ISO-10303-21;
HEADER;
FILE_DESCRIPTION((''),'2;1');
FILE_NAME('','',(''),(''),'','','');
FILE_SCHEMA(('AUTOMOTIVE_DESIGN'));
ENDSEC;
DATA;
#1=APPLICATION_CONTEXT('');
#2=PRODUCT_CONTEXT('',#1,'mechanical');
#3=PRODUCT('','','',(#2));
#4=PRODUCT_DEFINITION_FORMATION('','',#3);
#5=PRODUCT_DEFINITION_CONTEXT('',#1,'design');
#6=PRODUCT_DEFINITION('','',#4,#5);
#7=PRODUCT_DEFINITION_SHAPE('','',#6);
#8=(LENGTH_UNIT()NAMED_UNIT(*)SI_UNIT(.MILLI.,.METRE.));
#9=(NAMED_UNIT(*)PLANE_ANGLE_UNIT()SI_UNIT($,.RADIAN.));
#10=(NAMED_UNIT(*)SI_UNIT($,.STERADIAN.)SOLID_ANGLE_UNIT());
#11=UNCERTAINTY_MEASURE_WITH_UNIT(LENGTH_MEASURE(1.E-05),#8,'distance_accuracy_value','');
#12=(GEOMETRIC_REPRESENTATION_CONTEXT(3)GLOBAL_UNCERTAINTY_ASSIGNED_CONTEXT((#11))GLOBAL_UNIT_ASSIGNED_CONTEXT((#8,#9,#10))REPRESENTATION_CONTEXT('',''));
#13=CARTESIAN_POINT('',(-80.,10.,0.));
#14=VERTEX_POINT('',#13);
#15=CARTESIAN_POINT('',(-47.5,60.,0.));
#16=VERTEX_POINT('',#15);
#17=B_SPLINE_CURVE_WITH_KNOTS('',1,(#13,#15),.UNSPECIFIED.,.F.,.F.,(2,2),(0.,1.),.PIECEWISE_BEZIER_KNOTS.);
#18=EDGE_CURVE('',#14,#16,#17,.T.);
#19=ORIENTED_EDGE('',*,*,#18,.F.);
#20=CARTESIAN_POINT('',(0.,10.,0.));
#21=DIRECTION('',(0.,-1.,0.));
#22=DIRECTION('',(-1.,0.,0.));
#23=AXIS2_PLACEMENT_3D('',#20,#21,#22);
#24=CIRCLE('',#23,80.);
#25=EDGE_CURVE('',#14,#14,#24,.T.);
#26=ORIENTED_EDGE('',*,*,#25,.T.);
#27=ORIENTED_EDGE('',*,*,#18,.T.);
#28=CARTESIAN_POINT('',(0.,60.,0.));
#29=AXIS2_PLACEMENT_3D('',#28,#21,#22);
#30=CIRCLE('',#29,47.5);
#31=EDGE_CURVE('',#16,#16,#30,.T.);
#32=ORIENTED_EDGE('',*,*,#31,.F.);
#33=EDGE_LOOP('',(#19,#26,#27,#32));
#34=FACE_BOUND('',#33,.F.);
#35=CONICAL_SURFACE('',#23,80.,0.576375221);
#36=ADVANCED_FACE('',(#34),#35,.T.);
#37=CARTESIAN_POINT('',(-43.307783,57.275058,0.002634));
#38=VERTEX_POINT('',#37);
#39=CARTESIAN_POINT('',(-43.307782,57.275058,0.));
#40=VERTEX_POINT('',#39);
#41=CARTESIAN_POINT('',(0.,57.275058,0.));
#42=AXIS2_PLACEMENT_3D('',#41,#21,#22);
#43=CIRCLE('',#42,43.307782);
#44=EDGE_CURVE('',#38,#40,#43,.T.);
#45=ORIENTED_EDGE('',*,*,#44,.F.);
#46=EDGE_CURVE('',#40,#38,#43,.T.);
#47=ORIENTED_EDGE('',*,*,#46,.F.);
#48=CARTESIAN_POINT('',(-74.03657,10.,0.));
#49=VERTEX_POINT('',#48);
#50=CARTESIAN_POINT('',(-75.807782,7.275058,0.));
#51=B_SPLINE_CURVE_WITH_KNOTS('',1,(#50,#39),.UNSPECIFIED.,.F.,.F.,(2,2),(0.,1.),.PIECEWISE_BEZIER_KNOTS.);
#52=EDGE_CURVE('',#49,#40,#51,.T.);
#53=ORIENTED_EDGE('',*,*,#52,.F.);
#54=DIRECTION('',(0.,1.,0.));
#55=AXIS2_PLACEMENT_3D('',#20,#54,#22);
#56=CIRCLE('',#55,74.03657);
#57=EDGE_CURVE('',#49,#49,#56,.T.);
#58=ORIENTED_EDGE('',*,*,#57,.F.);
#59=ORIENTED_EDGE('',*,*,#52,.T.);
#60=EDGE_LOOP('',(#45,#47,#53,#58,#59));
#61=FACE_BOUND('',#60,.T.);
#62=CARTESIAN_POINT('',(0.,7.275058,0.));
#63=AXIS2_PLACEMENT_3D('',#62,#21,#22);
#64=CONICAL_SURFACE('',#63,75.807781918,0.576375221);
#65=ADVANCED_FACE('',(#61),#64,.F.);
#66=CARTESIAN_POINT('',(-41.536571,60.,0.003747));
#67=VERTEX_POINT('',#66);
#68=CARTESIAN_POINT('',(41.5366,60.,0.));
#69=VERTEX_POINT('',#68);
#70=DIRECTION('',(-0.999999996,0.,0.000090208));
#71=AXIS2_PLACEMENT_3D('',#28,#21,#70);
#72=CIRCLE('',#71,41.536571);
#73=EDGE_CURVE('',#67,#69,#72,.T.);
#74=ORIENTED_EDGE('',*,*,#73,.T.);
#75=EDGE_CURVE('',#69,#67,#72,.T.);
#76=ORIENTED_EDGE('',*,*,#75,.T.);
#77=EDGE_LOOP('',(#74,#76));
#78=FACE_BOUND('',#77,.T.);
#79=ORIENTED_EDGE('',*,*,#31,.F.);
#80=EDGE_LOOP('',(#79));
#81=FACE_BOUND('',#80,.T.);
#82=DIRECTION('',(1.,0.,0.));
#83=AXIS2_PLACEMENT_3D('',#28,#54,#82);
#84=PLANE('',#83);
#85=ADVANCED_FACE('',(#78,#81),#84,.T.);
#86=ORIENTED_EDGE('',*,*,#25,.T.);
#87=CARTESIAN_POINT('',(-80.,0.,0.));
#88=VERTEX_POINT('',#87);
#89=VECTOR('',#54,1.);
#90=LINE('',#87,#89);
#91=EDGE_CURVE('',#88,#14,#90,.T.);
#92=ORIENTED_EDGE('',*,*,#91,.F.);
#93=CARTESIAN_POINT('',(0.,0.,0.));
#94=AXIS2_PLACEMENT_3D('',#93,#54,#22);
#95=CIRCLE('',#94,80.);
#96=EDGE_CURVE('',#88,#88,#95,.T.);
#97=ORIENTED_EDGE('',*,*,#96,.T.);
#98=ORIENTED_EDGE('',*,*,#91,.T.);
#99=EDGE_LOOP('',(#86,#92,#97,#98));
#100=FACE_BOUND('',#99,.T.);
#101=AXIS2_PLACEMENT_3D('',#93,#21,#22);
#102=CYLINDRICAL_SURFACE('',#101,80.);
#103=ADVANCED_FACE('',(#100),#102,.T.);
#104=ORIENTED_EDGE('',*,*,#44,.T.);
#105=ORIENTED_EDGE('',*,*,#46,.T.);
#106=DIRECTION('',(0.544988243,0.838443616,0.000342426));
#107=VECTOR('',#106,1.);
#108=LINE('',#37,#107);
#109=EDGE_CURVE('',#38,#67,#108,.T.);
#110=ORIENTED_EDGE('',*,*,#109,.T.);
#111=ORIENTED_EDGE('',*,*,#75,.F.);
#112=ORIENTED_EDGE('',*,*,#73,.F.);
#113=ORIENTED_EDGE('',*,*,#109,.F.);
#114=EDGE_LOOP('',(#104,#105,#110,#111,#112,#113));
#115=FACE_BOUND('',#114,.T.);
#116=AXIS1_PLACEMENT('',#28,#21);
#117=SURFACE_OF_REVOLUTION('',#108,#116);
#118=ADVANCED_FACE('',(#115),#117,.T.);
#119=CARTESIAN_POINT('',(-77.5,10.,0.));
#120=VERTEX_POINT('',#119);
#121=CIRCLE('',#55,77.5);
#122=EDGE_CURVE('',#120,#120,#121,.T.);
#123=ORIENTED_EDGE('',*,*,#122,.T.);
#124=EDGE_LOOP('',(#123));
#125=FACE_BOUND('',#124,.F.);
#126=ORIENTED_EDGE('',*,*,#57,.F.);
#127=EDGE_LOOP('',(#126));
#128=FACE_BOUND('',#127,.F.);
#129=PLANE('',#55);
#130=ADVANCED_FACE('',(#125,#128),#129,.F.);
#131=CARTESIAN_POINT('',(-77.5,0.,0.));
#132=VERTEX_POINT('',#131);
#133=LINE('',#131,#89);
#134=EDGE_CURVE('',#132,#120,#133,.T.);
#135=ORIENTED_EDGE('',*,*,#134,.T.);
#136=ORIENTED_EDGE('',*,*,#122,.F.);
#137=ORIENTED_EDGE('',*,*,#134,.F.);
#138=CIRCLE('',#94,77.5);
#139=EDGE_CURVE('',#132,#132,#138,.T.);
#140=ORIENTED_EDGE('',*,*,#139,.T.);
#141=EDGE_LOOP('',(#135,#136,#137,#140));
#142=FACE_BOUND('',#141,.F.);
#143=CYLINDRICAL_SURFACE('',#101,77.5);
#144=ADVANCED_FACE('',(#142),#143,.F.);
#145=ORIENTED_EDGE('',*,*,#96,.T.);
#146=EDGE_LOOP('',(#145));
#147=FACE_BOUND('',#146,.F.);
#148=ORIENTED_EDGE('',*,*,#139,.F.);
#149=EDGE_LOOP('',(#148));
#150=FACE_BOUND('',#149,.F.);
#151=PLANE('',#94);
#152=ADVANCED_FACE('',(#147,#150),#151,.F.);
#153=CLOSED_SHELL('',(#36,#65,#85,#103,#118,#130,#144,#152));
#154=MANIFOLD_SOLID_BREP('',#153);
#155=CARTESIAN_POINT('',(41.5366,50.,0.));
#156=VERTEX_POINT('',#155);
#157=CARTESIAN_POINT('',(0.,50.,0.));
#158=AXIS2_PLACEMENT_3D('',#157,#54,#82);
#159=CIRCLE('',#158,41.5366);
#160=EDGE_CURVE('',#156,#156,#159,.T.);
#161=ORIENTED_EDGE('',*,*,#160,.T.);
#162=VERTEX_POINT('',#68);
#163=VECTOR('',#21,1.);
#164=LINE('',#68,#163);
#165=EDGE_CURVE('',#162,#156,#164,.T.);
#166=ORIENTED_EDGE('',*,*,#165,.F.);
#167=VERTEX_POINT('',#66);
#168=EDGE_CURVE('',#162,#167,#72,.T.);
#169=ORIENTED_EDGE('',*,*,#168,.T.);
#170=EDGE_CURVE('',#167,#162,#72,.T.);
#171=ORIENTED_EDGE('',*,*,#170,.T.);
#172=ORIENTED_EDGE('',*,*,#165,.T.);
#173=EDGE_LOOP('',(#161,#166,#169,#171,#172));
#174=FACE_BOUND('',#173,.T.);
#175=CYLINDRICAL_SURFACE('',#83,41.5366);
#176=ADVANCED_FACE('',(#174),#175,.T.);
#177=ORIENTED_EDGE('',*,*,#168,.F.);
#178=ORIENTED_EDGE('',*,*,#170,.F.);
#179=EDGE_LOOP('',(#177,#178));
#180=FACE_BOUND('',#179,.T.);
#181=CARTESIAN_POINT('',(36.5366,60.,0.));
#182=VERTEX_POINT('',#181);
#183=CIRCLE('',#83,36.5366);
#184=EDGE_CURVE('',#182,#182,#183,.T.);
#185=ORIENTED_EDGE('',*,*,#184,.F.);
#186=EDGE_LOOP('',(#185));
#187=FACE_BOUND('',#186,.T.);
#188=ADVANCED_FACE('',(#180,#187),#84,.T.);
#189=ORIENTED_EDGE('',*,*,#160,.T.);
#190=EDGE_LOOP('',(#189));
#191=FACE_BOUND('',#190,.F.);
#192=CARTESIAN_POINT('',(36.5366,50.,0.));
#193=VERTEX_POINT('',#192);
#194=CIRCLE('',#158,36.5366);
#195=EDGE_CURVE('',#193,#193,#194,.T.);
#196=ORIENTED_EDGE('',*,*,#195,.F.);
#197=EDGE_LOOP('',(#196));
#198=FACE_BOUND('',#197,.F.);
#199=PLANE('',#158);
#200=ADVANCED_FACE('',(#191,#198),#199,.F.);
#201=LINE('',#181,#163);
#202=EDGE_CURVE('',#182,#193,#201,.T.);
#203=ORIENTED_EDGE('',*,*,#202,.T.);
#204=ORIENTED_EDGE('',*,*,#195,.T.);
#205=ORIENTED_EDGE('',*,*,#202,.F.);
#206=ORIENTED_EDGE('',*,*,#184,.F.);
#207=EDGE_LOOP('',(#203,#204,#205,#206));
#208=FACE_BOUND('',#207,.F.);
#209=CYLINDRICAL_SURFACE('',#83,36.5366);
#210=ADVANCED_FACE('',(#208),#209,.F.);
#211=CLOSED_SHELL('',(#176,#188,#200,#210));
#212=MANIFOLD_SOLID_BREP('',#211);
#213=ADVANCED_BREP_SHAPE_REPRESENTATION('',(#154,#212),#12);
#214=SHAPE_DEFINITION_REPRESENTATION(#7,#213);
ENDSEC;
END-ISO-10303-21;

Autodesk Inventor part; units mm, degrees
ref_plane "YZ Plane" through (0, 0, 0) normal (1, 0, 0) x (0, 1, 0)
ref_plane "XZ Plane" through (0, 0, 0) normal (0, 1, 0) x (-1, 0, 0)
sketch "Sketch1" plane through (0, 0, 0) normal (0, 1, 0) x (-1, 0, 0)
  circle A0 centre (0, 0) radius 80
  circle A1 centre (0, 0) radius 77.5
  dimension "d0" = 160
  dimension "d1" = 2.5
extrude "Extrusion1" add sketch "Sketch1" along normal blind 10
ref_plane "Work Plane1" through (0, 60, 0) normal (0, 1, 0) x (1, 0, 0)
sketch "Sketch2" plane through (0, 60, 0) normal (0, 1, 0) x (1, 0, 0)
  circle A0 centre (0, 0) radius 52.5
  circle A1 centre (0, 0) radius 77.5 projected
  circle A2 centre (0, 0) radius 47.5
  dimension "d5" = 25
  dimension "d6" = 5
loft "Loft1" add profiles "Sketch2" section 1 edges at (80, 10, 0) contours A2
shell "Shell1" thickness 5 removed faces 2 at (-3.5318, 60, -3.5628) at (-15.7693, 10, 10.5801)
sketch "Sketch4" plane through (0, 60, 0) normal (0, 1, 0) x (1, 0, 0)
  circle A0 centre (0, 0) radius 36.5366
  circle A1 centre (0, 0) radius 41.5366 projected
  dimension "d18" = 5
extrude "Extrusion4" add sketch "Sketch4" against normal blind 10
properties part number "Parte baja R2D2_3DPrint"
